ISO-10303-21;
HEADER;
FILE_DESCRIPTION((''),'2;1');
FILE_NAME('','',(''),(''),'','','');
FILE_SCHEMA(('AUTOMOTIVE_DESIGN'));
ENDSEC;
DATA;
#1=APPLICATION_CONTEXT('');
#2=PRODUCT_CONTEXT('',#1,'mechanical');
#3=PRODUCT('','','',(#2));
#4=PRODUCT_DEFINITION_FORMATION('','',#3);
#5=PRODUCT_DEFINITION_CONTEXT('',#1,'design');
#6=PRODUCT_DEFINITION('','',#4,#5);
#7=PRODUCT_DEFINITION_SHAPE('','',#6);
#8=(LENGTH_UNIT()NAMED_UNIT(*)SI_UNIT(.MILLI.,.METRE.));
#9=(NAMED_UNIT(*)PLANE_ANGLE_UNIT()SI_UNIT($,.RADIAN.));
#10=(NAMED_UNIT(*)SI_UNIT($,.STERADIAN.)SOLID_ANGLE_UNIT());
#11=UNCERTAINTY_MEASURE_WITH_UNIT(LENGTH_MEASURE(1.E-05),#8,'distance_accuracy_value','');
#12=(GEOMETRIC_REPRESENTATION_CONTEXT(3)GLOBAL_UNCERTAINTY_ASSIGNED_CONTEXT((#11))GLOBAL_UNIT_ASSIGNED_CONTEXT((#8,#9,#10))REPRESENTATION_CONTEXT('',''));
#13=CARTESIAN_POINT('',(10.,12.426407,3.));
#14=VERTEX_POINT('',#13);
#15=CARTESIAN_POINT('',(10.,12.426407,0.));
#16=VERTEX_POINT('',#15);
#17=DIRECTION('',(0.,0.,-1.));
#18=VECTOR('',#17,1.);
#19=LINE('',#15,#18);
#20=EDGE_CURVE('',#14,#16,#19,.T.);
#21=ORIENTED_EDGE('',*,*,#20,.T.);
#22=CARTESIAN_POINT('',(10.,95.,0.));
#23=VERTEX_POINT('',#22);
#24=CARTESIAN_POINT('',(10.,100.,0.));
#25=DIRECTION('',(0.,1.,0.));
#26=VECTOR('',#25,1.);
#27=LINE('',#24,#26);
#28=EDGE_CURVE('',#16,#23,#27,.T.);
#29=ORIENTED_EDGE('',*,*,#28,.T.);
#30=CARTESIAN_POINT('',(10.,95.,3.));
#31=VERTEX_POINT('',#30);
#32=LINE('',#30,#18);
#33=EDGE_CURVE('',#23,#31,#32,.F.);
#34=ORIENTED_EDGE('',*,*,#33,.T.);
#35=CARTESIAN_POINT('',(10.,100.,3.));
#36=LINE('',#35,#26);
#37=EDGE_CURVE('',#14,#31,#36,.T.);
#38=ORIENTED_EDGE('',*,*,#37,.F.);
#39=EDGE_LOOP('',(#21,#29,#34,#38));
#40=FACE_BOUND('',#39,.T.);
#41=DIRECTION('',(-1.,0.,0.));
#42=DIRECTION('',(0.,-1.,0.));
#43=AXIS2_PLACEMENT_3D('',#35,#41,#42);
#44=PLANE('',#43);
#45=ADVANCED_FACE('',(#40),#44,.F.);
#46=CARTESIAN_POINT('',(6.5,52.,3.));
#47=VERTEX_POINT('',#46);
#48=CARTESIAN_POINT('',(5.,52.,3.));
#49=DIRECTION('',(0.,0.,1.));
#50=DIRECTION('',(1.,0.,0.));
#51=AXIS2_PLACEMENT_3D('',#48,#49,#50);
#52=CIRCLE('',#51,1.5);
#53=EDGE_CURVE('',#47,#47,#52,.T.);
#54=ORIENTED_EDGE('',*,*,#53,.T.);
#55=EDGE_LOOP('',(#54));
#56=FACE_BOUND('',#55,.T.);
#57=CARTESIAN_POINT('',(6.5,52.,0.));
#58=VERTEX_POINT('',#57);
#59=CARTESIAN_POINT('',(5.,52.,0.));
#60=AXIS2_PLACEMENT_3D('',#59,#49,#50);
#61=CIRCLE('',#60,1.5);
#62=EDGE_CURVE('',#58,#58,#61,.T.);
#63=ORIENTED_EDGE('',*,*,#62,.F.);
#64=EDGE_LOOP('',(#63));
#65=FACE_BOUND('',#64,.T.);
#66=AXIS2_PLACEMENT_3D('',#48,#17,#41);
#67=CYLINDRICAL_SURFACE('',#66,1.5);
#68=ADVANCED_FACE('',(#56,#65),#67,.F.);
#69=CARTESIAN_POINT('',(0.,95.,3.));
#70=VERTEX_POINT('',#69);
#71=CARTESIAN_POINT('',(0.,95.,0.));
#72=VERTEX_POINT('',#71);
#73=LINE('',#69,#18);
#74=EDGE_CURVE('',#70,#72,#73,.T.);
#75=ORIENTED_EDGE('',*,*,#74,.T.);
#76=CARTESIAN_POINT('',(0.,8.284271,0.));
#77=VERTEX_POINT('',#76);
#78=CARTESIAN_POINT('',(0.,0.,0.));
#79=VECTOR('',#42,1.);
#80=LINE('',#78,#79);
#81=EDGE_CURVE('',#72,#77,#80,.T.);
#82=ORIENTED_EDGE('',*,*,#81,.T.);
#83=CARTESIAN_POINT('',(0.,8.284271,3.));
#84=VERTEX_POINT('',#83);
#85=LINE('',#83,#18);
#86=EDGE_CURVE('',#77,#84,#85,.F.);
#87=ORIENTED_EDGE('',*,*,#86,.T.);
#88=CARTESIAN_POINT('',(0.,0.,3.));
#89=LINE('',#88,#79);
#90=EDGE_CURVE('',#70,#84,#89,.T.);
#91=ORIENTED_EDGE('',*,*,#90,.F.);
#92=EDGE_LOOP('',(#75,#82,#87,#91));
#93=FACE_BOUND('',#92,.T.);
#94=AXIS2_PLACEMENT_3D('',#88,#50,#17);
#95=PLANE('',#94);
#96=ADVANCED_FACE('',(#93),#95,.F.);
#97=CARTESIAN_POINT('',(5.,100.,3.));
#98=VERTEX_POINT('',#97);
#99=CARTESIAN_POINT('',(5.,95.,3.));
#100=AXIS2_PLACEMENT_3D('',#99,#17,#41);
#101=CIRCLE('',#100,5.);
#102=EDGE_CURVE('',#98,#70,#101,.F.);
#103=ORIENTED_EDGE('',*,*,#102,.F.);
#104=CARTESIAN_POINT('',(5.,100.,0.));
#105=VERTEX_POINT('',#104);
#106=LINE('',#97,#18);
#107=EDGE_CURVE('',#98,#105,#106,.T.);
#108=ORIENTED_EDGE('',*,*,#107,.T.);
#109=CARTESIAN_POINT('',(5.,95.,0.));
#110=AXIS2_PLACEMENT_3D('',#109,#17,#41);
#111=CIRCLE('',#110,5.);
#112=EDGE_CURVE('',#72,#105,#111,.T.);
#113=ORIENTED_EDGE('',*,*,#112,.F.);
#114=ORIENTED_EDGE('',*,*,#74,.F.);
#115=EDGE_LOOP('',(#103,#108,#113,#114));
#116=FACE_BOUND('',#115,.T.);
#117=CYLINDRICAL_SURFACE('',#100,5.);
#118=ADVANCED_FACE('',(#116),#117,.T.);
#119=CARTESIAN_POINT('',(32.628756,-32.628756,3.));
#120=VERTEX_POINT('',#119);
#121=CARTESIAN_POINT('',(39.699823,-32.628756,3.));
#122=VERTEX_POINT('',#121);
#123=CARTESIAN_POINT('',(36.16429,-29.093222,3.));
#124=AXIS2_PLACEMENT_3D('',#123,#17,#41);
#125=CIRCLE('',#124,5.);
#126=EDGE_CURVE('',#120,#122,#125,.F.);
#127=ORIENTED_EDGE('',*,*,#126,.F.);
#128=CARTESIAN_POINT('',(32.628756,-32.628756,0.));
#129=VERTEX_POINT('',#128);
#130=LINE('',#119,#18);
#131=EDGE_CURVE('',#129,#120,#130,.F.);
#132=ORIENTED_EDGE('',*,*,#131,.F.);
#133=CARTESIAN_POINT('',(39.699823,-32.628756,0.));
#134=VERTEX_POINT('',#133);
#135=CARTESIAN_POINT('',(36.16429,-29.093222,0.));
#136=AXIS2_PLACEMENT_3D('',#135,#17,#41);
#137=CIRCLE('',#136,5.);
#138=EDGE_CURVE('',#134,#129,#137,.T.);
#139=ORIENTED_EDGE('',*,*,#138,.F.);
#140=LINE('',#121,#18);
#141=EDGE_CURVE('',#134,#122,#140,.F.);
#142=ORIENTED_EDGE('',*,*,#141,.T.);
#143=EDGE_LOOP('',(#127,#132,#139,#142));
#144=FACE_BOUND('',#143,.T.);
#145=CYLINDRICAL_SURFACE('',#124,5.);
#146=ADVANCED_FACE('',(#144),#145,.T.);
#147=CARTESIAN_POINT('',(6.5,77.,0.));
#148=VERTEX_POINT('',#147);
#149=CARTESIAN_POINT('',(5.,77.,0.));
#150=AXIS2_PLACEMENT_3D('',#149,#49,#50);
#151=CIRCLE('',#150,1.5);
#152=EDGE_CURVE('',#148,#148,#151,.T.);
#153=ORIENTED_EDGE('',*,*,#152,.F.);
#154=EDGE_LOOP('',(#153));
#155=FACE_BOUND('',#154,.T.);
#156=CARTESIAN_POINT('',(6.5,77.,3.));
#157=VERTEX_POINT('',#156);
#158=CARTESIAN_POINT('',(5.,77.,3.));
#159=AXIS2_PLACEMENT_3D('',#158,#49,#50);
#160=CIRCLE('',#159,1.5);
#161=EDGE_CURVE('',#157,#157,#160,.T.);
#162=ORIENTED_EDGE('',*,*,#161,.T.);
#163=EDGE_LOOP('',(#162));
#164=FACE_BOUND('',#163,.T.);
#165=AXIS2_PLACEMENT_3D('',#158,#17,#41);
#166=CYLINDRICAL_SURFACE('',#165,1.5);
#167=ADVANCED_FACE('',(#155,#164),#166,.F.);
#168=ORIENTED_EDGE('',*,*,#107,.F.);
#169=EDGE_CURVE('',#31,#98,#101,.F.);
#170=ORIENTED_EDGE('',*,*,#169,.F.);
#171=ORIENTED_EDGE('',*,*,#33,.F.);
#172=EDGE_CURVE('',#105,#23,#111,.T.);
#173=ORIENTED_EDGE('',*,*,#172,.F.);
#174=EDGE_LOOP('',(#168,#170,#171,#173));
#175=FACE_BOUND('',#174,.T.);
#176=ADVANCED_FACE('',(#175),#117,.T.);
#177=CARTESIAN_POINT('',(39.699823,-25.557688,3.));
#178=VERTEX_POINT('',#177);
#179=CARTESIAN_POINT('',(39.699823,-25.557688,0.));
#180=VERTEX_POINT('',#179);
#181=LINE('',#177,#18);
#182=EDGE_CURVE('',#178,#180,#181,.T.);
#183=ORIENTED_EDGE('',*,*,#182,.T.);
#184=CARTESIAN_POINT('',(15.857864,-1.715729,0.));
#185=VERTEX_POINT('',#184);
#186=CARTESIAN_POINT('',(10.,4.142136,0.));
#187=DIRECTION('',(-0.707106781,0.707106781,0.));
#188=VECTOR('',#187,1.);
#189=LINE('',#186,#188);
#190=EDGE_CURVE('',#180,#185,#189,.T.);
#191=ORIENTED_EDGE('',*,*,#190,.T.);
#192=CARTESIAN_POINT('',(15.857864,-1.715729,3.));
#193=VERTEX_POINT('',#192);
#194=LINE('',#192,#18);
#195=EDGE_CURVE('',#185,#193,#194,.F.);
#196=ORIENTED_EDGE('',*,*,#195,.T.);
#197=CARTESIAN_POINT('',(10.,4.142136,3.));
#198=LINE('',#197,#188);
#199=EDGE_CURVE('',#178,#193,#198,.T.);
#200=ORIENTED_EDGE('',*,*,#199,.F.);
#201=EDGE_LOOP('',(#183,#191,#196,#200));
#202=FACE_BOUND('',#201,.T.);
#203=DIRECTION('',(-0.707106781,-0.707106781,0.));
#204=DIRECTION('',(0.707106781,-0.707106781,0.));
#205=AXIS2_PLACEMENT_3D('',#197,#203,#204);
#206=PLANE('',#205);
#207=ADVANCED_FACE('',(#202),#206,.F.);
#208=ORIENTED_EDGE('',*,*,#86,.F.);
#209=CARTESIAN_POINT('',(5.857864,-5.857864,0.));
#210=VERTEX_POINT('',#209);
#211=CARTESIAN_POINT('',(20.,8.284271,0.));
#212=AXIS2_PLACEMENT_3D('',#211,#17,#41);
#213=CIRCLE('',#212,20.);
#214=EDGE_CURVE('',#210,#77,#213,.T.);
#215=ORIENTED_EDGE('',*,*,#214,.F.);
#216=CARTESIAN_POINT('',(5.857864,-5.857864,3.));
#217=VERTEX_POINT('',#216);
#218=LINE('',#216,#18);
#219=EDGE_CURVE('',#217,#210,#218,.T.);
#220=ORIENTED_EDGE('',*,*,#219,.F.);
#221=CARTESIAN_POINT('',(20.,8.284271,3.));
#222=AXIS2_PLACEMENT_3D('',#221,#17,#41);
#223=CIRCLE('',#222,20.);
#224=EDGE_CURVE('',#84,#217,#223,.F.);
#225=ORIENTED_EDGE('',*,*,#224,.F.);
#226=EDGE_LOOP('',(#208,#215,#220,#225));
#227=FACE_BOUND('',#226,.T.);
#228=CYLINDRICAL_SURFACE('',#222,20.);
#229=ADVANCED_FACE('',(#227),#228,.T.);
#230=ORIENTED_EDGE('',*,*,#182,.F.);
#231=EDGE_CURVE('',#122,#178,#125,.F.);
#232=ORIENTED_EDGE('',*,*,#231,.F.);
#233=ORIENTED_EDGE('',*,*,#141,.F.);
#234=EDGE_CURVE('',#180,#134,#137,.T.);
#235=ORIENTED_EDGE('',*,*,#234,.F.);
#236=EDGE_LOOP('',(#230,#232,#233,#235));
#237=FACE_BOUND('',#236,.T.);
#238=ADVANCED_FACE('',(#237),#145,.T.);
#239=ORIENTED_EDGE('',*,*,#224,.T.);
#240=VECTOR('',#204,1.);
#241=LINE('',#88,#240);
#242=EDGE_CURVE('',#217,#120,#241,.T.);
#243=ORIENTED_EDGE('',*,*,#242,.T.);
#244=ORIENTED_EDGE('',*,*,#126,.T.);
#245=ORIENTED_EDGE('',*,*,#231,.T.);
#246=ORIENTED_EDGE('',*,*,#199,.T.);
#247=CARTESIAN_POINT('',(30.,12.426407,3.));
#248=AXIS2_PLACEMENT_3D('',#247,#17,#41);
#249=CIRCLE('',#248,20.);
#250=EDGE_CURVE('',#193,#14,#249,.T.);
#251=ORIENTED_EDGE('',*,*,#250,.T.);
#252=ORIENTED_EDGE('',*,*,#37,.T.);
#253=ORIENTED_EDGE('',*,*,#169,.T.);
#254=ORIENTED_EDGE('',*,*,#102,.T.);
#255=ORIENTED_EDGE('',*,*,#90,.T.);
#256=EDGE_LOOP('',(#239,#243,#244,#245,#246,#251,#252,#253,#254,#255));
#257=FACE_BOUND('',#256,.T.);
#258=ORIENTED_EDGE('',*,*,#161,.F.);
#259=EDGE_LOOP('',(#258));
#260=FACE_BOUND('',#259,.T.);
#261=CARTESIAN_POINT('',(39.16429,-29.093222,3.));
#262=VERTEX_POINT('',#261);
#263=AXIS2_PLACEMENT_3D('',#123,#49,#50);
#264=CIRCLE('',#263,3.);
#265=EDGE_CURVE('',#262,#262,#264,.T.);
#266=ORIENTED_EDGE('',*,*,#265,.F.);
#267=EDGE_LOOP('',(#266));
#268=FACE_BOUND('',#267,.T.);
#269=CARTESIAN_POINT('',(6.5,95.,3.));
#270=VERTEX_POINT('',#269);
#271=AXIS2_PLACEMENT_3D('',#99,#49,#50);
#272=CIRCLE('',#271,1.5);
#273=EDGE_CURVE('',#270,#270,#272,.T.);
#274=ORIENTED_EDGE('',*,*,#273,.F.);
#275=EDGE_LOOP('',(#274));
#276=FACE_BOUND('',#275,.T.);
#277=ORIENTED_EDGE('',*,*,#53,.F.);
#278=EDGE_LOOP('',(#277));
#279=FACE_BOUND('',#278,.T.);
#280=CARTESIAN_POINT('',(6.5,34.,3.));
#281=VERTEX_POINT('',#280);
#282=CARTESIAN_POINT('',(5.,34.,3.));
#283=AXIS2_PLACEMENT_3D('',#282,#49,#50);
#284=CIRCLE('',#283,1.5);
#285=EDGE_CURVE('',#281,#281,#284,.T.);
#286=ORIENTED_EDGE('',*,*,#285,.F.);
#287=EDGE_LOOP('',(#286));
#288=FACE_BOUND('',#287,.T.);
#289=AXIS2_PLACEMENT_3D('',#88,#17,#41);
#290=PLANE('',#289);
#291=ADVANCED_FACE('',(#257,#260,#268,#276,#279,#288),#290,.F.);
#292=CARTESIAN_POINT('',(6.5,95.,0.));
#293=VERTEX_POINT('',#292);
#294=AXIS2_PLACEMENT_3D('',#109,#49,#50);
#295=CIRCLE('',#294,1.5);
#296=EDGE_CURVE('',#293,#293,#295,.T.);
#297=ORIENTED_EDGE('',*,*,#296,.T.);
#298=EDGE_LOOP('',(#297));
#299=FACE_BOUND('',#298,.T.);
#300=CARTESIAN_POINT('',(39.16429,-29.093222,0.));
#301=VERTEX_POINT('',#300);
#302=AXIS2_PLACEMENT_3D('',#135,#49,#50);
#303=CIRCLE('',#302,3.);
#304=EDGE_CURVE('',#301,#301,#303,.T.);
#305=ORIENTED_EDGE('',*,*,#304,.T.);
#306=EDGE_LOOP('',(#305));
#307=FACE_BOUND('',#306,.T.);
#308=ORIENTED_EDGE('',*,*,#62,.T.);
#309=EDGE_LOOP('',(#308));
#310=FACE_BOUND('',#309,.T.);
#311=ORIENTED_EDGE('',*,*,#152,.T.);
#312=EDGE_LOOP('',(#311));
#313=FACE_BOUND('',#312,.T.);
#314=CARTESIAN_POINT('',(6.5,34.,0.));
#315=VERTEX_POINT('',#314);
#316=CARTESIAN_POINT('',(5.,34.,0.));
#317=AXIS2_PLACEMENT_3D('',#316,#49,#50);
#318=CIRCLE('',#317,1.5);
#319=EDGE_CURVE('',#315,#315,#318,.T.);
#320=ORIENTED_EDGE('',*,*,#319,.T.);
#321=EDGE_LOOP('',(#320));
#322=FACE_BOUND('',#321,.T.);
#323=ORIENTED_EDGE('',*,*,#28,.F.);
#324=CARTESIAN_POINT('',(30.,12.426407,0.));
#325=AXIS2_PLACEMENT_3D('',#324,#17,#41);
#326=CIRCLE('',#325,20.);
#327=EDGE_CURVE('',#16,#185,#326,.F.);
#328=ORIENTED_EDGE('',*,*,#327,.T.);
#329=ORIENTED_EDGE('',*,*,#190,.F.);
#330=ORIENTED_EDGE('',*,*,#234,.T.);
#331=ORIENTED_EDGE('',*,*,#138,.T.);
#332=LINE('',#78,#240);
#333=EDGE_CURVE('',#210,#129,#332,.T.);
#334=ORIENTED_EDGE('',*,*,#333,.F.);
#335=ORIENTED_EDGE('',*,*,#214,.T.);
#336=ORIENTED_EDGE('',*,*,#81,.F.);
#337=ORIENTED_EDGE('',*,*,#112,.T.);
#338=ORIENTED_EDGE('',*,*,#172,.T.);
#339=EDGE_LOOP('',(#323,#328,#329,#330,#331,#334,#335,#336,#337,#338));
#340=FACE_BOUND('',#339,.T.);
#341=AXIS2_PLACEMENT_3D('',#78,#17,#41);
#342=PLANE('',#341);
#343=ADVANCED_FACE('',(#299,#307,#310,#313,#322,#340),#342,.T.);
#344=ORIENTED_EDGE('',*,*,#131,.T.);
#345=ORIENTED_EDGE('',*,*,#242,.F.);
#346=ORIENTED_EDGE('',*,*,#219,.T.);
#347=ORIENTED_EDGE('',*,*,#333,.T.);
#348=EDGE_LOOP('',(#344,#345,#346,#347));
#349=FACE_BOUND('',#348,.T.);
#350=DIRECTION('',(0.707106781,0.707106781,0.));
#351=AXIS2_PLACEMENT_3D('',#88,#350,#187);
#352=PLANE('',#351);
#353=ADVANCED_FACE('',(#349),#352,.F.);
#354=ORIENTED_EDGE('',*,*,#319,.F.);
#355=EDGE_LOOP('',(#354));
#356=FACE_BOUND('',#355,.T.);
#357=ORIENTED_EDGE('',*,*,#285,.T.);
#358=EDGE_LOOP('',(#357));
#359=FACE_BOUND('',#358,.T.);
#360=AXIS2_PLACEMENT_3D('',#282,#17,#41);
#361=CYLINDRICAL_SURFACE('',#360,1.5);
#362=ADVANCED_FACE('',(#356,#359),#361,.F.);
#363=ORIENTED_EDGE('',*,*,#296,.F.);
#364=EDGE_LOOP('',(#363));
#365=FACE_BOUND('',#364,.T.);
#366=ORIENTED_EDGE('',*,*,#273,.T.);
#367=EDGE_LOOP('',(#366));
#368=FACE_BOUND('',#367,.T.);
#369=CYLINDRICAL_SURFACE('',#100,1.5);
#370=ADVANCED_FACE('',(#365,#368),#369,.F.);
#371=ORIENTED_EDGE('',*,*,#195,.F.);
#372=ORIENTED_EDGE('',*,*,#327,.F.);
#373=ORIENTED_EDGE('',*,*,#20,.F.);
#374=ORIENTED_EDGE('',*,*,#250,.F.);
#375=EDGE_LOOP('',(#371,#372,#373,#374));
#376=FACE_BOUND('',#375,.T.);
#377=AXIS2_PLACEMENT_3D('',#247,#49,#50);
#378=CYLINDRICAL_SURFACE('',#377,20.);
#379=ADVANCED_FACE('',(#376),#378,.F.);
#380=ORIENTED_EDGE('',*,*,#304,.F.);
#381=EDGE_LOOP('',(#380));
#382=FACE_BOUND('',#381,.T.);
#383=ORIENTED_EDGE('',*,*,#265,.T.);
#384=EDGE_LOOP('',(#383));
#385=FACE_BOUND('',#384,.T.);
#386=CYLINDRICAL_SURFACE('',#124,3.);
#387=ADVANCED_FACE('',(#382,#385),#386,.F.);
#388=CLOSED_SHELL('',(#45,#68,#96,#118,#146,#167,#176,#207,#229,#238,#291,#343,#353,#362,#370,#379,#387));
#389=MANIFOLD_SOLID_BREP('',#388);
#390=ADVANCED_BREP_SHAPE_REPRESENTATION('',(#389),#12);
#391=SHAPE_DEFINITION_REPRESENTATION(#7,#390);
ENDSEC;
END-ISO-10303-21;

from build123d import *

# Parameters (mm, degrees)
SKETCH_1_R      = 1.5
SKETCH_1_R_2    = 3
EXTRUDE_1_DEPTH = 3
FILLET_1_R      = 20
FILLET_2_R      = 5
FILLET_3_R      = 5


with BuildPart() as part:
    # 草图1 → 凸台-拉伸1 (new body)
    with BuildSketch(Plane.XY):
        Polygon((0, 0), (0, 100), (10, 100), (10, 4.142135624), (43.235357393, -29.093221769), (36.164289581, -36.164289581), align=None)
        with Locations((5, 34)):
            Circle(SKETCH_1_R, mode=Mode.SUBTRACT)
        with Locations((36.164289581, -29.093221769)):
            Circle(SKETCH_1_R_2, mode=Mode.SUBTRACT)
        with Locations((5, 52)):
            Circle(SKETCH_1_R, mode=Mode.SUBTRACT)
        with Locations((5, 77)):
            Circle(SKETCH_1_R, mode=Mode.SUBTRACT)
        with Locations((5, 95)):
            Circle(SKETCH_1_R, mode=Mode.SUBTRACT)
    extrude(amount=EXTRUDE_1_DEPTH)

    # 圆角1
    fillet_1_edges = [part.edges().sort_by_distance(p)[0] for p in [
        (0, 0, 1.5),
        (10, 4.142135624, 1.5),
    ]]
    fillet(fillet_1_edges, radius=FILLET_1_R)

    # 圆角2
    fillet_2_edges = [part.edges().sort_by_distance(p)[0] for p in [
        (36.164289581, -36.164289581, 1.5),
        (43.235357393, -29.093221769, 1.5),
    ]]
    fillet(fillet_2_edges, radius=FILLET_2_R - 0.0001)  # a hair under: the kernel refuses the full size

    # 圆角3
    fillet_3_edges = [part.edges().sort_by_distance(p)[0] for p in [
        (0, 100, 1.5),
        (10, 100, 1.5),
    ]]
    fillet(fillet_3_edges, radius=FILLET_3_R - 0.0001)  # a hair under: the kernel refuses the full size


solid = part.part
